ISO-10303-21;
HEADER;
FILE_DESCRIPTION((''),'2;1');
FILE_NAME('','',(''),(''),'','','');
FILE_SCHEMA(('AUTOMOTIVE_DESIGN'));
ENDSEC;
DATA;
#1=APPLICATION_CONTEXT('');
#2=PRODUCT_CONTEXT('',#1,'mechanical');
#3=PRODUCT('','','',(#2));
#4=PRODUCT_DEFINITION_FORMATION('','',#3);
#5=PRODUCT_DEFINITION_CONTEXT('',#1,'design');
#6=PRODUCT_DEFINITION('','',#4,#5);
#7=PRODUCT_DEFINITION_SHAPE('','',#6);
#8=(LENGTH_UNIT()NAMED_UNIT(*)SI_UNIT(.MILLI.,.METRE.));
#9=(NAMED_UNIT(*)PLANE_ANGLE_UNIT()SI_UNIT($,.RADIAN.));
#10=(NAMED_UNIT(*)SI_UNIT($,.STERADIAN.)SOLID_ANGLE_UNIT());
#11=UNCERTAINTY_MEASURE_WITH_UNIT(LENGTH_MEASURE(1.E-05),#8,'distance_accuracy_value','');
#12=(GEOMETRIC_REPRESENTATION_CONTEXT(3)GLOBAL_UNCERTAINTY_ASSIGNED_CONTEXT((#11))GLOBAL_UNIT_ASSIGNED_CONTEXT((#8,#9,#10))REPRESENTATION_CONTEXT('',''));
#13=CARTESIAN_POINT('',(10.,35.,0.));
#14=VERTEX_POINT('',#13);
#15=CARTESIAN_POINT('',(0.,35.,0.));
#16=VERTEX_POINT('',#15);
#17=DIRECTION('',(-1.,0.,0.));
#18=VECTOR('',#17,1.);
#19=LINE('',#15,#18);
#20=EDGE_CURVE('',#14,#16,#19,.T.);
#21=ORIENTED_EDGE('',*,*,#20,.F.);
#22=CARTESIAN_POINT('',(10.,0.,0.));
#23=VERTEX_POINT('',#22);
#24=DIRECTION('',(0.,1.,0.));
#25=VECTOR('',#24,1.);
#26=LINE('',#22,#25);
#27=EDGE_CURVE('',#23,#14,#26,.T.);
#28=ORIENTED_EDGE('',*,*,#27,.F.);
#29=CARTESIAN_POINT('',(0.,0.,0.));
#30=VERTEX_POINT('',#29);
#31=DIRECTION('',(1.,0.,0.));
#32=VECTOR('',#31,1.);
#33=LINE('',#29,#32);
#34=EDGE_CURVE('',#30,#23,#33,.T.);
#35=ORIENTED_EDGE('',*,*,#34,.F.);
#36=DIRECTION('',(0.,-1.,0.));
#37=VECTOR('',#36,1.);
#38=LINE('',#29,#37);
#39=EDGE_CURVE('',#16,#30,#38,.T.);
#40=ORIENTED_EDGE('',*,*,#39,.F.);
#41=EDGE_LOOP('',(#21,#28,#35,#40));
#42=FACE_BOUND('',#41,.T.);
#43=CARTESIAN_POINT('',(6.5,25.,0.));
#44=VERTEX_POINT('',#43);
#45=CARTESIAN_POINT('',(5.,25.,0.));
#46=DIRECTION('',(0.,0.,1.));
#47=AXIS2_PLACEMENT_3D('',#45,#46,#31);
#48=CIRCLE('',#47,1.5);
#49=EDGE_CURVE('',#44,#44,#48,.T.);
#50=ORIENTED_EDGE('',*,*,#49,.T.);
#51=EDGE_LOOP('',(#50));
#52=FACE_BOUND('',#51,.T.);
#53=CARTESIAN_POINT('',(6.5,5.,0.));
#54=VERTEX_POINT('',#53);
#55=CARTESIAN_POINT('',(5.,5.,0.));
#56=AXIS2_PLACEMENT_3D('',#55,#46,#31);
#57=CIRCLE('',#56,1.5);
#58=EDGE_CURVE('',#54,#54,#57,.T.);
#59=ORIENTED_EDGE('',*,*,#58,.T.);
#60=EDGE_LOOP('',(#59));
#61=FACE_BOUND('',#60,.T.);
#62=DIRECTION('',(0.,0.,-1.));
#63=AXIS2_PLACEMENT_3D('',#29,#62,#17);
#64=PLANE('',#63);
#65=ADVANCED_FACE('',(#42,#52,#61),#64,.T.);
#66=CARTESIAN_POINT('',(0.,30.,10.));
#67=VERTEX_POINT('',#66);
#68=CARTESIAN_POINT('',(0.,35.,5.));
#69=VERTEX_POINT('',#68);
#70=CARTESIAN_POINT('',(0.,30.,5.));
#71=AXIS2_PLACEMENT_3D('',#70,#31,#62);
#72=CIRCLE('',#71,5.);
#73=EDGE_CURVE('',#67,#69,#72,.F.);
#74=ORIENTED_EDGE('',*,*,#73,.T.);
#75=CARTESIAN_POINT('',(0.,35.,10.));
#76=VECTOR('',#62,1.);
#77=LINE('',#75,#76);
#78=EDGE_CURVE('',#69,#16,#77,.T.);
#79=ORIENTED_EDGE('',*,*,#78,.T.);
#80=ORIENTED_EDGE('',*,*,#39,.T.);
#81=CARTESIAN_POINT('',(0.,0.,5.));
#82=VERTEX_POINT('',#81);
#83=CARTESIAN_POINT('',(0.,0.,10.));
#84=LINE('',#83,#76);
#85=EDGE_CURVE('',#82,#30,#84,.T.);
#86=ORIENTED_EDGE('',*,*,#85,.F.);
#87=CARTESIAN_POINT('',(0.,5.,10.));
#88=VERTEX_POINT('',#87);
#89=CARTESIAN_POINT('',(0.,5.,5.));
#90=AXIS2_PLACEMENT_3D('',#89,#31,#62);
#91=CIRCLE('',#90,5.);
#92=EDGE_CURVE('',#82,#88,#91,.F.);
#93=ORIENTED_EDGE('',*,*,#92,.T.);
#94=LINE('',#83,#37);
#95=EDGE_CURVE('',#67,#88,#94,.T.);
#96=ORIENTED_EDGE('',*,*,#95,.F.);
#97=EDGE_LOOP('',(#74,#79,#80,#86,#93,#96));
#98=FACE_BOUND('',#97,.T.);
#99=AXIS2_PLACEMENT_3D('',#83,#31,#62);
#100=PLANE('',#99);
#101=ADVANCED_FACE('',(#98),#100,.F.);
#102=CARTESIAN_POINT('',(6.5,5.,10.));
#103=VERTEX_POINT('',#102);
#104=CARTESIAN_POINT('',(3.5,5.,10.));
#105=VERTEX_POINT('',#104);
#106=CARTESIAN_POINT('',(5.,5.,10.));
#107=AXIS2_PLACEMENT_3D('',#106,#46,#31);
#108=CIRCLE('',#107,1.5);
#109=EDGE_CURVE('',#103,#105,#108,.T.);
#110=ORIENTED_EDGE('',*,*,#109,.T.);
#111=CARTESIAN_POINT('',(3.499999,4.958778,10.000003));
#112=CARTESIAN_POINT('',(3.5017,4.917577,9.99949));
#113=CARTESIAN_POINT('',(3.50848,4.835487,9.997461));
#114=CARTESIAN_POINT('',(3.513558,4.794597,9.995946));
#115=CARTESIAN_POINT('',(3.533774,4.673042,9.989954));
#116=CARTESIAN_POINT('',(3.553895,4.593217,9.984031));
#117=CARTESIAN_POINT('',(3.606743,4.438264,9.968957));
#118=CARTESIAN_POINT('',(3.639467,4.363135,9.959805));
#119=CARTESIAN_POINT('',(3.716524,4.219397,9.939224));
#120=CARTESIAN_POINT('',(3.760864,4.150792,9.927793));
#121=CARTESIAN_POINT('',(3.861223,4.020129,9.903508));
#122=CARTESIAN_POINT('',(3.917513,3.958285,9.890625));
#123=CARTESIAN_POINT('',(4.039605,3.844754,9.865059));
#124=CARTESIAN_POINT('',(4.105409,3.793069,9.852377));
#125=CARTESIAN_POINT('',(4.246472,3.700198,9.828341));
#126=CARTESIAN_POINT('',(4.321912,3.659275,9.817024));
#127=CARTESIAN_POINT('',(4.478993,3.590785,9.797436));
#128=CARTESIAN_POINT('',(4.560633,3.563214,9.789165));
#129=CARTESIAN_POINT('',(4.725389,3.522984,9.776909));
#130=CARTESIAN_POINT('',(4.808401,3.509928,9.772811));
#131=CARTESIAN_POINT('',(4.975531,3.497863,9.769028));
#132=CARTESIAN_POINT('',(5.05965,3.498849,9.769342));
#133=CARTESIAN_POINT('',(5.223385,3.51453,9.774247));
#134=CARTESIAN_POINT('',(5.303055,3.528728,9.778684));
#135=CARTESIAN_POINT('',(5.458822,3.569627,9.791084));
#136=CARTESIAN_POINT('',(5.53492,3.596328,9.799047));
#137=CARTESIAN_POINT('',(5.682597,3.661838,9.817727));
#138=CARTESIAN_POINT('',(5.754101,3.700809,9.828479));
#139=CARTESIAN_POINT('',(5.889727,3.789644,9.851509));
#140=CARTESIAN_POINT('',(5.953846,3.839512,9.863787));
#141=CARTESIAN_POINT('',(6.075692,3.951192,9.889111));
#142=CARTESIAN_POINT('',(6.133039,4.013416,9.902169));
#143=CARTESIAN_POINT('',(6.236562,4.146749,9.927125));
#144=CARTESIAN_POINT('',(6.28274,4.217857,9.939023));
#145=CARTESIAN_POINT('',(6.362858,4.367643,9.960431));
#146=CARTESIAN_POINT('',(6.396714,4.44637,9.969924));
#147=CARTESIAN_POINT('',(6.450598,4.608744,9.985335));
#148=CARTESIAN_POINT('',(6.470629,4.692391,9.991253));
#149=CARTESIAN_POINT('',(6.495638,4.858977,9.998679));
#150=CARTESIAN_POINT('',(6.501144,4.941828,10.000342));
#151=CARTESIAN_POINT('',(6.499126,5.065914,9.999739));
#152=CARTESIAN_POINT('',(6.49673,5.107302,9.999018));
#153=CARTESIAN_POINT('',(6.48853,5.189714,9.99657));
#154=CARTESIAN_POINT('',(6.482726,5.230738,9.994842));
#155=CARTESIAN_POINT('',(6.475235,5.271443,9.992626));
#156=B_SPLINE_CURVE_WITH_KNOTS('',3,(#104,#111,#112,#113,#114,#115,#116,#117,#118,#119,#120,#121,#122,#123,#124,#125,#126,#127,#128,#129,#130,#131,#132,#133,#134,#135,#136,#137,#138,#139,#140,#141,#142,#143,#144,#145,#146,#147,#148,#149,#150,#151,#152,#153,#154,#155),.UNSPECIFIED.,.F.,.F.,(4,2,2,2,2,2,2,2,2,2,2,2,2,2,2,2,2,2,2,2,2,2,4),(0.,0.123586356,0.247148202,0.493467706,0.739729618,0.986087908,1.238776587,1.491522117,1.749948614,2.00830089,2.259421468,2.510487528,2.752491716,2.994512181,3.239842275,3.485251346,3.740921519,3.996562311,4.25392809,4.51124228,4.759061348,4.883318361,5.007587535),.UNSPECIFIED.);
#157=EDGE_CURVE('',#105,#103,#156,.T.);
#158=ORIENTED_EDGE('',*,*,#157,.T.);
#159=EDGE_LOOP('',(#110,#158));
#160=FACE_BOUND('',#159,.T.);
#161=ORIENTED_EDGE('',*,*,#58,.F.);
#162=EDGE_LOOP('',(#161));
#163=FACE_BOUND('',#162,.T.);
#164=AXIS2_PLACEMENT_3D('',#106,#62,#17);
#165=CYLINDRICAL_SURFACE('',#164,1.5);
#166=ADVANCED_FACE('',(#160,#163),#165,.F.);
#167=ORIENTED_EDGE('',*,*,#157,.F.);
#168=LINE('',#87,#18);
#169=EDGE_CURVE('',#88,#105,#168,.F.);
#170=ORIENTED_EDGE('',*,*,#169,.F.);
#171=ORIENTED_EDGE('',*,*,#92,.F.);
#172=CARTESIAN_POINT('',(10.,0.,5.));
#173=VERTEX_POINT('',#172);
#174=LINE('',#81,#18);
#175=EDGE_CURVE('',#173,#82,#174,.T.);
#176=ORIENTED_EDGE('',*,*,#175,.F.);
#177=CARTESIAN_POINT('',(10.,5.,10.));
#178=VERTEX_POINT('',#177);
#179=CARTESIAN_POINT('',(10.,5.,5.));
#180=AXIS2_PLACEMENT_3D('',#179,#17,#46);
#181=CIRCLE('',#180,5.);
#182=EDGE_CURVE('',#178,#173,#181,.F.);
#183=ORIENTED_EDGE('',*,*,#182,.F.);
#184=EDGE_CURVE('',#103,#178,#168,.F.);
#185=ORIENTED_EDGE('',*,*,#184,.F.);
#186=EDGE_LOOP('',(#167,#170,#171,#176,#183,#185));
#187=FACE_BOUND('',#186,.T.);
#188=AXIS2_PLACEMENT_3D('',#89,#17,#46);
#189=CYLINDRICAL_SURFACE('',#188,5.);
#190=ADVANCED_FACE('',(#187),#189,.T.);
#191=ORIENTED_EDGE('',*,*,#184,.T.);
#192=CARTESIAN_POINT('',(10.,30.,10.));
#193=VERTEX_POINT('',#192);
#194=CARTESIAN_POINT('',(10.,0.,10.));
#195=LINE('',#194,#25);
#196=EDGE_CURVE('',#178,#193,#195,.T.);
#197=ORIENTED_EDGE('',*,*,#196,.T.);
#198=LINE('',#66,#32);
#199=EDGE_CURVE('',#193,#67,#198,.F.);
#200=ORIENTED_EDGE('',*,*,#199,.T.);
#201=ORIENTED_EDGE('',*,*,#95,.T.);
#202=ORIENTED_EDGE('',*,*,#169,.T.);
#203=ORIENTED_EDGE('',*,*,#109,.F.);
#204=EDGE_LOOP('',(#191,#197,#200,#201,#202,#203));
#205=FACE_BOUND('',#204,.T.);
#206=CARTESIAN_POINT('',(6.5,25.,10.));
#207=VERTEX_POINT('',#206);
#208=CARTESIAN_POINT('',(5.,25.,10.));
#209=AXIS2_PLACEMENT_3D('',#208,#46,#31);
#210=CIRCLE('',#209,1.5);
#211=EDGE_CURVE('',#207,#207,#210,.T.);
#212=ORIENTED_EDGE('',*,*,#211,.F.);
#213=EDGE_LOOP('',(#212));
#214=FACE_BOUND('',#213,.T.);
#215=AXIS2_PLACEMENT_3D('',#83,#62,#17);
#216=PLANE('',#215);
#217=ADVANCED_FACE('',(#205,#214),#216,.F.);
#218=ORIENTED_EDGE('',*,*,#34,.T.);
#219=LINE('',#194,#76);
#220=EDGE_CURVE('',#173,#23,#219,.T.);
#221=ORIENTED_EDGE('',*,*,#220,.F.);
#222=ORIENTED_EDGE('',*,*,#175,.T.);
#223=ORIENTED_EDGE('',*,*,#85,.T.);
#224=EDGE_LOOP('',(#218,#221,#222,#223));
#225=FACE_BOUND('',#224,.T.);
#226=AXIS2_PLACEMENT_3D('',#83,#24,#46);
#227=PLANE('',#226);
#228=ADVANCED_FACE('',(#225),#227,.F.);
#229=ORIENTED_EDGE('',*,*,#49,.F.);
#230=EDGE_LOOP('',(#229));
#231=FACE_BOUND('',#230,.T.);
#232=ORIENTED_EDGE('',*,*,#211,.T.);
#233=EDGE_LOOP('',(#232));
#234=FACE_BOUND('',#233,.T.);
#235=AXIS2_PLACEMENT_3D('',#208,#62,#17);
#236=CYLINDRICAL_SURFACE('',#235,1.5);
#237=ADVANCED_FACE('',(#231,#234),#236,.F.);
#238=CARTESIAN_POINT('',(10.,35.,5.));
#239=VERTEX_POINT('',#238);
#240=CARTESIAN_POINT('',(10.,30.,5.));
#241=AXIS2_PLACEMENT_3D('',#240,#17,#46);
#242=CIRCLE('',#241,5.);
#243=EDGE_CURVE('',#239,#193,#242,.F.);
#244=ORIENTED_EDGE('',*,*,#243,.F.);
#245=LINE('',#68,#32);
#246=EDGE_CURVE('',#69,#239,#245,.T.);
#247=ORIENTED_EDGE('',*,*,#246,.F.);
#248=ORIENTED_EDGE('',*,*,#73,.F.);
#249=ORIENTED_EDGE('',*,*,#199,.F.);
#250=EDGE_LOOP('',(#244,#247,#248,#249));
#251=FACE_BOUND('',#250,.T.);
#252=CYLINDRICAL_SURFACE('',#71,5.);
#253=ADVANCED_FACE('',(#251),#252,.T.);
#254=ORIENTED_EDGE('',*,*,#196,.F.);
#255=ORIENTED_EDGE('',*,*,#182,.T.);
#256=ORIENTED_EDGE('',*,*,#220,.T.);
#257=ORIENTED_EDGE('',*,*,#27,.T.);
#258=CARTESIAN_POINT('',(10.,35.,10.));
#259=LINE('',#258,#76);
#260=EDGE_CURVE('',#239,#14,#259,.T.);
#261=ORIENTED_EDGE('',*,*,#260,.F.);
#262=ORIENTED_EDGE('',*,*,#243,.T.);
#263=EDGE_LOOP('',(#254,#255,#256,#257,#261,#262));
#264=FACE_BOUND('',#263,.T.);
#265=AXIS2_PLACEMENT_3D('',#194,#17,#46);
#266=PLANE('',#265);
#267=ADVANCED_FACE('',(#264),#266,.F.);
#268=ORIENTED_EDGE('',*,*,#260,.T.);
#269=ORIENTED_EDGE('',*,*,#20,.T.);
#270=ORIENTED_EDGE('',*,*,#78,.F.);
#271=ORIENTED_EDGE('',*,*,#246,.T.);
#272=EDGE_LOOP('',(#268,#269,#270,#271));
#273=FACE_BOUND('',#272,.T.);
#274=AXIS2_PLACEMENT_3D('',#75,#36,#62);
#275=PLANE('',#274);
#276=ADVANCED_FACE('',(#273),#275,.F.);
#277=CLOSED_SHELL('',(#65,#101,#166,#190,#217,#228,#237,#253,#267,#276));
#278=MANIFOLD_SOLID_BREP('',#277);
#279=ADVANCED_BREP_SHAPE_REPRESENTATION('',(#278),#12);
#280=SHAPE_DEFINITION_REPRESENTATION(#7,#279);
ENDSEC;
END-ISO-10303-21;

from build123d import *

# Parameters (mm, degrees)
SKETCH1_W           = 10
SKETCH1_H           = 35
SKETCH1_R           = 1.5
BOSS_EXTRUDE1_DEPTH = 10
FILLET1_R           = 5
FILLET2_R           = 5


with BuildPart() as part:
    # Sketch1 → Boss-Extrude1 (new body)
    with BuildSketch(Plane.XY):
        with Locations((5, 17.5)):
            Rectangle(SKETCH1_W, SKETCH1_H)
        with Locations((5, 25)):
            Circle(SKETCH1_R, mode=Mode.SUBTRACT)
        with Locations((5, 5)):
            Circle(SKETCH1_R, mode=Mode.SUBTRACT)
    extrude(amount=BOSS_EXTRUDE1_DEPTH)

    # Fillet1
    # the kernel refuses this fillet: 5 mm, written as the material it takes off along each edge
    with BuildSketch(Plane(origin=(-12.5, 0, 10), x_dir=(0, 0, -1), z_dir=(1, 0, 0))) as fillet1_piece_1:
        with BuildLine():
            CenterArc((FILLET1_R, FILLET1_R), FILLET1_R, 180, 90)
            Line((0, FILLET1_R), (0, 0))
            Line((0, 0), (FILLET1_R, 0))
        make_face()
    extrude(amount=35, mode=Mode.SUBTRACT)

    # Fillet2
    fillet2_edges = [part.edges().sort_by_distance(p)[0] for p in [
        (5, 35, 10),
    ]]
    fillet(fillet2_edges, radius=FILLET2_R)


solid = part.part
